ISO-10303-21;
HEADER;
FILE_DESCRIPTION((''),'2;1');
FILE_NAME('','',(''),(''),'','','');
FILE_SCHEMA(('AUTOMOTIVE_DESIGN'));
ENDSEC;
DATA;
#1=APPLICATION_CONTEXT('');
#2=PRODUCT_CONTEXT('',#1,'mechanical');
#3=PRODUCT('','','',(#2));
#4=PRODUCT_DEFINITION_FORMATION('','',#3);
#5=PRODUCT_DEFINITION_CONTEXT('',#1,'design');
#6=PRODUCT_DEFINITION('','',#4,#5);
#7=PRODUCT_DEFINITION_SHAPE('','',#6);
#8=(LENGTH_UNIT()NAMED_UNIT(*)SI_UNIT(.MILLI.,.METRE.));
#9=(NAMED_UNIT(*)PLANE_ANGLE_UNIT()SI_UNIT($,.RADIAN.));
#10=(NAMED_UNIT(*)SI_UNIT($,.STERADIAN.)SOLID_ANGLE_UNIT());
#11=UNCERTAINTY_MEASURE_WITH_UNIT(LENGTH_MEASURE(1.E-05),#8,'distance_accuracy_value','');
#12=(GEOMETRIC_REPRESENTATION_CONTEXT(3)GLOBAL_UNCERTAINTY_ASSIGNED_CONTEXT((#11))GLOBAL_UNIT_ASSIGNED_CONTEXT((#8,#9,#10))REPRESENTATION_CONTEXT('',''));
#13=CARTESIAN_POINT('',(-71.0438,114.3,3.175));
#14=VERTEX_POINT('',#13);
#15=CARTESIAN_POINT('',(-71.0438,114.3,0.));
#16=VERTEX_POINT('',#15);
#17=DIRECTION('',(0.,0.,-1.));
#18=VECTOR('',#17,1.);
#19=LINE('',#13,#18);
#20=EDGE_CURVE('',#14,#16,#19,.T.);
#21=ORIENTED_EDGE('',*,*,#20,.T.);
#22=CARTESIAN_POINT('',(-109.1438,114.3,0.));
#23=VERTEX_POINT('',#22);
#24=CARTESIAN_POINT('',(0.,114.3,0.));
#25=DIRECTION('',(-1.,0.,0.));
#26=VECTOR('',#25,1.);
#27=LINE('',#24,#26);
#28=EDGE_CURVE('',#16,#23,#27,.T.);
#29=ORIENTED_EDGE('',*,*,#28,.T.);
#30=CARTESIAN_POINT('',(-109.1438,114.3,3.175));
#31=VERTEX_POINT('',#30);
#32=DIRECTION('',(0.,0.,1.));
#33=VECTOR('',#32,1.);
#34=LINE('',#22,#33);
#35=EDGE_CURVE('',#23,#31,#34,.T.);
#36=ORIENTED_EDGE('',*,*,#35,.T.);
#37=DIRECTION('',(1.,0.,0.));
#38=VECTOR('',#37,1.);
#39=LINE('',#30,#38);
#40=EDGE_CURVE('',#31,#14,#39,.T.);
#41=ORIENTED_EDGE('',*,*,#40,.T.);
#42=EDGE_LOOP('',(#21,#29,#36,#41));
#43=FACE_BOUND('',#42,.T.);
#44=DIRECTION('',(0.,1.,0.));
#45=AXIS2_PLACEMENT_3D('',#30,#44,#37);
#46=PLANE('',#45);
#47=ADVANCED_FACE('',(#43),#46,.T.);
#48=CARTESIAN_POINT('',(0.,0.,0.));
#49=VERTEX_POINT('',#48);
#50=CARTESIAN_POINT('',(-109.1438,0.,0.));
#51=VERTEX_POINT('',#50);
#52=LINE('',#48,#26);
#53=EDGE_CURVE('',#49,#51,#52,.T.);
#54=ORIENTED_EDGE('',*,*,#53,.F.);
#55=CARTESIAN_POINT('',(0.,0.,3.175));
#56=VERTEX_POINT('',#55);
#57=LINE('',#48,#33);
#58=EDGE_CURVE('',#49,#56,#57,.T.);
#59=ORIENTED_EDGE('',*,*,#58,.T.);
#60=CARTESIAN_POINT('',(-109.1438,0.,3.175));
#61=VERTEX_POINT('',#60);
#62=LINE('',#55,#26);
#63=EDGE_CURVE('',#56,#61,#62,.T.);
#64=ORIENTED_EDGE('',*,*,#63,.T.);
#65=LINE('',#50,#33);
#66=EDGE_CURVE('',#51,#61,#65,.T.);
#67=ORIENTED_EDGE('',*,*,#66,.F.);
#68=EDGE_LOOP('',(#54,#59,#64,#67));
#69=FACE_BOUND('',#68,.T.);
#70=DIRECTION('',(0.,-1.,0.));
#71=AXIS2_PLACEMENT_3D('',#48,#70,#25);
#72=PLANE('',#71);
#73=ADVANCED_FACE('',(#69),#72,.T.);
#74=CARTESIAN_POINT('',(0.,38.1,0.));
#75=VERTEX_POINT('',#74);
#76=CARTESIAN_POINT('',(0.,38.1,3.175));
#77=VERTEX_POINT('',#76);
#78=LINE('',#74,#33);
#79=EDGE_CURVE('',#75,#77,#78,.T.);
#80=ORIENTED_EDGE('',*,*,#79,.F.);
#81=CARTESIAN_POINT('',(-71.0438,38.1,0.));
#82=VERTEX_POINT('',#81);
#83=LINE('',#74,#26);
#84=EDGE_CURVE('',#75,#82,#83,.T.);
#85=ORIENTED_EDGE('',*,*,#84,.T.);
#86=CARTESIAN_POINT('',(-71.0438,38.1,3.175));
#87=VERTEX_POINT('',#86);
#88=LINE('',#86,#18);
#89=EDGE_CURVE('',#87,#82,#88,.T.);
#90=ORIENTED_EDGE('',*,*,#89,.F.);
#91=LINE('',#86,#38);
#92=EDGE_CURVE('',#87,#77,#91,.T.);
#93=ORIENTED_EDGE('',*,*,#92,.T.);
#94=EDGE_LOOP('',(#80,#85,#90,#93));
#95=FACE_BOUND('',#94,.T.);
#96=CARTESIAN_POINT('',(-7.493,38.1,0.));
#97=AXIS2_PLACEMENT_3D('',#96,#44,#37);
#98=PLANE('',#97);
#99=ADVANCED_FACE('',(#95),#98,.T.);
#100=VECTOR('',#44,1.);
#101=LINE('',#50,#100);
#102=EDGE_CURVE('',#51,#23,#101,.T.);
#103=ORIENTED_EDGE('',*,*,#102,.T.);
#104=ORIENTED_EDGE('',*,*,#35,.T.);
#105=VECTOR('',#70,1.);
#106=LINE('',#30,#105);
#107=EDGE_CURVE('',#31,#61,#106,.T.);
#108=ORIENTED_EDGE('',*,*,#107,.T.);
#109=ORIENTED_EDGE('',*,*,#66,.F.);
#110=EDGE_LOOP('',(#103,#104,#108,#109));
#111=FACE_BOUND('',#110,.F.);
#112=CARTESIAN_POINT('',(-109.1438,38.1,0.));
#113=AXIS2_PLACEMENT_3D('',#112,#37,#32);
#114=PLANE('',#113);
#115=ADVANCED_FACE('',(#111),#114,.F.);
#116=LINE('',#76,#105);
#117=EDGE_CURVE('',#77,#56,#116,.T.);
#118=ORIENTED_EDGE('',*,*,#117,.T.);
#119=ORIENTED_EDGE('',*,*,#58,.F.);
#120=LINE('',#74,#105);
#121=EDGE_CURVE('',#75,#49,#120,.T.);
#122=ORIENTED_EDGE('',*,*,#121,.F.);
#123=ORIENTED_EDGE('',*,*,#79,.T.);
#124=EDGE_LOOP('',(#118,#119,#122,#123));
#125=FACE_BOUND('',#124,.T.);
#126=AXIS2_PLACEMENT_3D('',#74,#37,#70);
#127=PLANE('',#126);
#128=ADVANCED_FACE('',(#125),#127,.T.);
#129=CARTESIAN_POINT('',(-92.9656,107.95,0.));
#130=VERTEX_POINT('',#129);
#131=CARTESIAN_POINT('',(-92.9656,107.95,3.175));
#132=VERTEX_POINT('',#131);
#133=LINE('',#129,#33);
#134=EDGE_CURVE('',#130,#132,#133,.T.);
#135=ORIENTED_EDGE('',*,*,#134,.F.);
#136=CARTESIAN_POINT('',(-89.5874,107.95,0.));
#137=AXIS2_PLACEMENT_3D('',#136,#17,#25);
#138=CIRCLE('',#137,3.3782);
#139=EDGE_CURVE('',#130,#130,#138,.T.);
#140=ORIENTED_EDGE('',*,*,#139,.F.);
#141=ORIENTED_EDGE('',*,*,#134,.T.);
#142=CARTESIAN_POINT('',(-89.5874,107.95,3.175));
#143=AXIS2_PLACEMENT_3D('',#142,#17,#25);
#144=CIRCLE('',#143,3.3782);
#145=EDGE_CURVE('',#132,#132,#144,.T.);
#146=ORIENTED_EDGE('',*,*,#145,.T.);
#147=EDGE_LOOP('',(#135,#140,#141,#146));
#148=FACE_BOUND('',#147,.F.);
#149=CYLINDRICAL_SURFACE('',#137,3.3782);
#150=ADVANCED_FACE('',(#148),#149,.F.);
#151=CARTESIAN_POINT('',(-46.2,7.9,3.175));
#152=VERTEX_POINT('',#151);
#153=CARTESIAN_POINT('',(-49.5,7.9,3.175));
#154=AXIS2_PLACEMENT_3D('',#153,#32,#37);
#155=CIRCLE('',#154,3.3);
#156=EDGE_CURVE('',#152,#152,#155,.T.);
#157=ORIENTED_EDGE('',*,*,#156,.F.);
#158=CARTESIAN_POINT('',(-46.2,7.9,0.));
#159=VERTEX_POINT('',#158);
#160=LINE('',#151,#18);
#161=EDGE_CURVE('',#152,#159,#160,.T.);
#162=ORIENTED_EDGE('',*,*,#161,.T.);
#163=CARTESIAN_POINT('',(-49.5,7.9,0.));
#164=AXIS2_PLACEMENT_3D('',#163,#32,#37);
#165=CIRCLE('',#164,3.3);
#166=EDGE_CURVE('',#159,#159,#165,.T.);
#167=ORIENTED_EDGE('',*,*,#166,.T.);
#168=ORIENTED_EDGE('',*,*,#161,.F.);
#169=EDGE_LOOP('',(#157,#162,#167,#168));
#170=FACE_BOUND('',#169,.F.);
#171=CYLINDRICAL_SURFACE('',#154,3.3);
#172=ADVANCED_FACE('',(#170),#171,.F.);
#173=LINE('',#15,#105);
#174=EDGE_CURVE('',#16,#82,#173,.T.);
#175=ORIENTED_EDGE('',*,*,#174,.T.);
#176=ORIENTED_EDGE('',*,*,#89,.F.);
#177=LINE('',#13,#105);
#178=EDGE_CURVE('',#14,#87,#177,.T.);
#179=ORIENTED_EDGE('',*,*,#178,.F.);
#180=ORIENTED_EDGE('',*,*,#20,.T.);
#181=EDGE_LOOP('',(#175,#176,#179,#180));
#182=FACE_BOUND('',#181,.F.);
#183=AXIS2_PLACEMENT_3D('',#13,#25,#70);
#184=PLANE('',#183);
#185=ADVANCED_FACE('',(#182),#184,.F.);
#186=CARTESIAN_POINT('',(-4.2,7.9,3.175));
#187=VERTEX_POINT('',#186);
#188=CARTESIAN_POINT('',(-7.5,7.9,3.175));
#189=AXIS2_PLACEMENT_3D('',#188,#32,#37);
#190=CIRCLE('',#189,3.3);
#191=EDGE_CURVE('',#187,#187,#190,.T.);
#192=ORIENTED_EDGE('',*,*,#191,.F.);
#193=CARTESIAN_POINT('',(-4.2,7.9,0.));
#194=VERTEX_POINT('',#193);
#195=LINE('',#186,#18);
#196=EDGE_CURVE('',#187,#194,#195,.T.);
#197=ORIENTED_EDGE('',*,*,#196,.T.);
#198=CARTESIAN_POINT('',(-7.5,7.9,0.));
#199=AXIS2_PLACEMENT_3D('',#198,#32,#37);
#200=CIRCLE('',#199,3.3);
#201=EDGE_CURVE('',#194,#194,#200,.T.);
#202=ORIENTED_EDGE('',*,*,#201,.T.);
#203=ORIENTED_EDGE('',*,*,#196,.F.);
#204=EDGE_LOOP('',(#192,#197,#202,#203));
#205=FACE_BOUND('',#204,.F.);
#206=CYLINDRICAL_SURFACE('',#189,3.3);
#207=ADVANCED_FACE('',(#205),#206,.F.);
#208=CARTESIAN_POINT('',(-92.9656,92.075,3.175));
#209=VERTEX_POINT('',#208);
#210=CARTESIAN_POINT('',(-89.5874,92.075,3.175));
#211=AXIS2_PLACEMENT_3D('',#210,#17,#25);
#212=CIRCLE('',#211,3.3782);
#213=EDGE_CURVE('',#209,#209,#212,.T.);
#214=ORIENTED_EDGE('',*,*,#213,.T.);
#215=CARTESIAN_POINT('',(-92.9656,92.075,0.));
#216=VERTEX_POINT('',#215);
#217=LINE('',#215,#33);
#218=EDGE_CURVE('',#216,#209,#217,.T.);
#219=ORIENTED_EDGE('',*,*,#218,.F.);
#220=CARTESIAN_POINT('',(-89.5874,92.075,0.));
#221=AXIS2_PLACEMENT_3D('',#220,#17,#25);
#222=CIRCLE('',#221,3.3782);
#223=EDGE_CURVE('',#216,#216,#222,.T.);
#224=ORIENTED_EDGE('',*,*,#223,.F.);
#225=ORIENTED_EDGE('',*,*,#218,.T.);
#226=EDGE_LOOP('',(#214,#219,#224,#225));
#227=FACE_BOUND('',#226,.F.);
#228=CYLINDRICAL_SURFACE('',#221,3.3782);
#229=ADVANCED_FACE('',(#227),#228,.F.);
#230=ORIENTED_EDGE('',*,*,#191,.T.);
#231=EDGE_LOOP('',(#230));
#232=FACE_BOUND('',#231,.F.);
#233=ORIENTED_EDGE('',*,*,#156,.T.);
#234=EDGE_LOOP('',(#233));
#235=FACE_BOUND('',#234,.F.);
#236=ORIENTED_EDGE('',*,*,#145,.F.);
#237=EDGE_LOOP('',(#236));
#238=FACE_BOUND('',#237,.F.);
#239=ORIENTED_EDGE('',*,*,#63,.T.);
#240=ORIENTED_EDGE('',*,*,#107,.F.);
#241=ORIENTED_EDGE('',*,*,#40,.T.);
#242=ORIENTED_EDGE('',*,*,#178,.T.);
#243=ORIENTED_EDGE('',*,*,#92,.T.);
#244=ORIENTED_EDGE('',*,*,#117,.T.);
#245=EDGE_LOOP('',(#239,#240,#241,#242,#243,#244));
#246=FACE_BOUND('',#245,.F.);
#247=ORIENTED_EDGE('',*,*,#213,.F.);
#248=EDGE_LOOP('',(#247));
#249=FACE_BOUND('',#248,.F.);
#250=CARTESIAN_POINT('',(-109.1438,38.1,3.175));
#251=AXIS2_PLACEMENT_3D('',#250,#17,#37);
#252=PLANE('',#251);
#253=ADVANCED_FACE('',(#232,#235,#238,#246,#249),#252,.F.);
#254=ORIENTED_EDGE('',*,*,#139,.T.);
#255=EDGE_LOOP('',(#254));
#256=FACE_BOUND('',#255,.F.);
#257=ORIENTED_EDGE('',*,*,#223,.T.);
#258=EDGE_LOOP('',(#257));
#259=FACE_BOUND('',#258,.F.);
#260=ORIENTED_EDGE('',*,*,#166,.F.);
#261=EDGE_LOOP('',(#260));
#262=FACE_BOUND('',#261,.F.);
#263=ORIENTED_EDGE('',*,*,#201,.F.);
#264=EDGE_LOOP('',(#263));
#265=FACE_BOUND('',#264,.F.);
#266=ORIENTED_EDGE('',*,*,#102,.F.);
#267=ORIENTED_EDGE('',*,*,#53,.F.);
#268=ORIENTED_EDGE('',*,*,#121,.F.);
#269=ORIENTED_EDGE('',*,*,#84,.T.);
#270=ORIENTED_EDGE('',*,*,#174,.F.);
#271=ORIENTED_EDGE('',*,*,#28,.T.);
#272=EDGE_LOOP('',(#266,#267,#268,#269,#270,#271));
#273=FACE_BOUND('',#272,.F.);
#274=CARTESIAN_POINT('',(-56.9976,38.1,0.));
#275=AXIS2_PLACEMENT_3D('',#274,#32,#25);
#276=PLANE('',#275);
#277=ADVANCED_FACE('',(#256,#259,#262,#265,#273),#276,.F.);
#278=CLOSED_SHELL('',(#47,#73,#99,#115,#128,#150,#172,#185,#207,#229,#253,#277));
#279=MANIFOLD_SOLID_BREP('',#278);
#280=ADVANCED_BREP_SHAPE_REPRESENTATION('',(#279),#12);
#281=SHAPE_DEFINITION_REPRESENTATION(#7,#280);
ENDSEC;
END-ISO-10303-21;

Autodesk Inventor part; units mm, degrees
ref_plane "YZ Plane" through (0, 0, 0) normal (1, 0, 0) x (0, 1, 0)
ref_plane "XZ Plane" through (0, 0, 0) normal (0, 1, 0) x (-1, 0, 0)
ref_plane "XY Plane" through (0, 0, 0) normal (0, 0, 1) x (1, 0, 0)
sketch "Sketch1" plane through (0, 0, 0) normal (0, 0, 1) x (1, 0, 0)
  line L0 (0, 0) -> (-109.1438, 0)
  line L1 (-109.1438, 0) -> (-109.1438, 38.1)
  line L2 (-109.1438, 38.1) -> (0, 38.1)
  line L3 (0, 38.1) -> (0, 0)
  line L4 (0, 38.1) -> (-7.493, 38.1)
  line L5 (-7.493, 38.1) -> (-7.493, 8.1026)
  line L6 (-109.1438, 38.1) -> (-101.6508, 38.1)
  line L7 (-101.6508, 38.1) -> (-101.6508, 8.1026)
  dimension "d1" = 109.1438
  dimension "d2" = 38.1
  dimension "d3" = 7.493
  dimension "d4" = 29.9974
  dimension "d5" = 7.493
extrude "Plate1" add sketch "Sketch1" along normal blind 3.175
sketch "Sketch8" plane through (0, 0, 3.175) normal (0, 0, 1) x (1, 0, 0)
  circle A0 centre (-7.5, 7.9) radius 3.3 projected
  circle A1 centre (-49.5, 7.9) radius 3.3 projected
extrude "Cut1" cut sketch "Sketch8" against normal blind 3.175
sketch "Sketch10" plane through (0, 0, 3.175) normal (0, 0, 1) x (1, 0, 0)
  line L0 (-109.1438, 38.1) -> (0, 38.1) projected
  line L1 (-109.1438, 0) -> (-109.1438, 38.1) projected
  line L2 (-109.1438, 38.1) -> (-109.1438, 88.9)
  line L3 (-109.1438, 88.9) -> (-56.9976, 88.9)
  line L4 (-56.9976, 88.9) -> (-56.9976, 38.1)
  dimension "d21" = 50.8
  dimension "d22" = 52.1462
extrude "Extrusion1" cut sketch "Sketch10" against normal blind 25.4
sketch "Sketch15" plane through (-109.1438, 38.1, 3.175) normal (0, 1, 0) x (1, 0, 0)
  line L0 (109.1438, 3.175) -> (0, 3.175) projected
  line L1 (0, 3.175) -> (0, 0) projected
  line L2 (0, 0) -> (109.1438, 0) projected
  line L3 (52.1462, 0) -> (52.1462, 3.175) projected
extrude "Extrusion3" add sketch "Sketch15" along normal blind 76.2
sketch "Sketch16" plane through (0, 0, 0) normal (0, 0, -1) x (-1, 0, 0)
  circle A0 centre (89.5874, 107.95) radius 3.3782 projected
  circle A1 centre (89.5874, 92.075) radius 3.3782 projected
extrude "Cut4" cut sketch "Sketch16" against normal blind 3.175
sketch "Sketch17" plane through (0, 0, 3.175) normal (0, 0, 1) x (1, 0, 0)
  line L0 (-56.9976, 38.1) -> (0, 38.1) projected
  line L1 (-56.9976, 38.1) -> (-56.9976, 114.3) projected
  line L2 (-109.1438, 114.3) -> (-56.9976, 114.3) projected
  line L3 (-109.1438, 114.3) -> (-71.0438, 114.3)
  line L4 (-71.0438, 114.3) -> (-71.0438, 38.1)
  line L5 (-71.0438, 38.1) -> (-56.9976, 38.1)
  dimension "d35" = 38.1
extrude "Cut5" cut sketch "Sketch17" against normal blind 3.175
equation "\"d19\" = Thickness"
equation "\"d33\" = Thickness"
equation "\"d36\" = Thickness"
equation "\"BendRadius\" = Thickness"
equation "\"BendReliefWidth\" = Thickness"
equation "\"BendReliefDepth\" = 0.5 * Thickness"
equation "\"CornerReliefSize\" = 4 * Thickness"
equation "\"MinimumRemnant\" = 2 * Thickness"
equation "\"TransitionRadius\" = BendRadius"
equation "\"JacobiRadiusSize\" = BendRadius"
equation "\"GapSize\" = Thickness"
equation "\"d8\" = BendRadius"
equation "\"Thickness\" = 3.175"
properties part number "endstop 4" material "Aluminum 6061"
